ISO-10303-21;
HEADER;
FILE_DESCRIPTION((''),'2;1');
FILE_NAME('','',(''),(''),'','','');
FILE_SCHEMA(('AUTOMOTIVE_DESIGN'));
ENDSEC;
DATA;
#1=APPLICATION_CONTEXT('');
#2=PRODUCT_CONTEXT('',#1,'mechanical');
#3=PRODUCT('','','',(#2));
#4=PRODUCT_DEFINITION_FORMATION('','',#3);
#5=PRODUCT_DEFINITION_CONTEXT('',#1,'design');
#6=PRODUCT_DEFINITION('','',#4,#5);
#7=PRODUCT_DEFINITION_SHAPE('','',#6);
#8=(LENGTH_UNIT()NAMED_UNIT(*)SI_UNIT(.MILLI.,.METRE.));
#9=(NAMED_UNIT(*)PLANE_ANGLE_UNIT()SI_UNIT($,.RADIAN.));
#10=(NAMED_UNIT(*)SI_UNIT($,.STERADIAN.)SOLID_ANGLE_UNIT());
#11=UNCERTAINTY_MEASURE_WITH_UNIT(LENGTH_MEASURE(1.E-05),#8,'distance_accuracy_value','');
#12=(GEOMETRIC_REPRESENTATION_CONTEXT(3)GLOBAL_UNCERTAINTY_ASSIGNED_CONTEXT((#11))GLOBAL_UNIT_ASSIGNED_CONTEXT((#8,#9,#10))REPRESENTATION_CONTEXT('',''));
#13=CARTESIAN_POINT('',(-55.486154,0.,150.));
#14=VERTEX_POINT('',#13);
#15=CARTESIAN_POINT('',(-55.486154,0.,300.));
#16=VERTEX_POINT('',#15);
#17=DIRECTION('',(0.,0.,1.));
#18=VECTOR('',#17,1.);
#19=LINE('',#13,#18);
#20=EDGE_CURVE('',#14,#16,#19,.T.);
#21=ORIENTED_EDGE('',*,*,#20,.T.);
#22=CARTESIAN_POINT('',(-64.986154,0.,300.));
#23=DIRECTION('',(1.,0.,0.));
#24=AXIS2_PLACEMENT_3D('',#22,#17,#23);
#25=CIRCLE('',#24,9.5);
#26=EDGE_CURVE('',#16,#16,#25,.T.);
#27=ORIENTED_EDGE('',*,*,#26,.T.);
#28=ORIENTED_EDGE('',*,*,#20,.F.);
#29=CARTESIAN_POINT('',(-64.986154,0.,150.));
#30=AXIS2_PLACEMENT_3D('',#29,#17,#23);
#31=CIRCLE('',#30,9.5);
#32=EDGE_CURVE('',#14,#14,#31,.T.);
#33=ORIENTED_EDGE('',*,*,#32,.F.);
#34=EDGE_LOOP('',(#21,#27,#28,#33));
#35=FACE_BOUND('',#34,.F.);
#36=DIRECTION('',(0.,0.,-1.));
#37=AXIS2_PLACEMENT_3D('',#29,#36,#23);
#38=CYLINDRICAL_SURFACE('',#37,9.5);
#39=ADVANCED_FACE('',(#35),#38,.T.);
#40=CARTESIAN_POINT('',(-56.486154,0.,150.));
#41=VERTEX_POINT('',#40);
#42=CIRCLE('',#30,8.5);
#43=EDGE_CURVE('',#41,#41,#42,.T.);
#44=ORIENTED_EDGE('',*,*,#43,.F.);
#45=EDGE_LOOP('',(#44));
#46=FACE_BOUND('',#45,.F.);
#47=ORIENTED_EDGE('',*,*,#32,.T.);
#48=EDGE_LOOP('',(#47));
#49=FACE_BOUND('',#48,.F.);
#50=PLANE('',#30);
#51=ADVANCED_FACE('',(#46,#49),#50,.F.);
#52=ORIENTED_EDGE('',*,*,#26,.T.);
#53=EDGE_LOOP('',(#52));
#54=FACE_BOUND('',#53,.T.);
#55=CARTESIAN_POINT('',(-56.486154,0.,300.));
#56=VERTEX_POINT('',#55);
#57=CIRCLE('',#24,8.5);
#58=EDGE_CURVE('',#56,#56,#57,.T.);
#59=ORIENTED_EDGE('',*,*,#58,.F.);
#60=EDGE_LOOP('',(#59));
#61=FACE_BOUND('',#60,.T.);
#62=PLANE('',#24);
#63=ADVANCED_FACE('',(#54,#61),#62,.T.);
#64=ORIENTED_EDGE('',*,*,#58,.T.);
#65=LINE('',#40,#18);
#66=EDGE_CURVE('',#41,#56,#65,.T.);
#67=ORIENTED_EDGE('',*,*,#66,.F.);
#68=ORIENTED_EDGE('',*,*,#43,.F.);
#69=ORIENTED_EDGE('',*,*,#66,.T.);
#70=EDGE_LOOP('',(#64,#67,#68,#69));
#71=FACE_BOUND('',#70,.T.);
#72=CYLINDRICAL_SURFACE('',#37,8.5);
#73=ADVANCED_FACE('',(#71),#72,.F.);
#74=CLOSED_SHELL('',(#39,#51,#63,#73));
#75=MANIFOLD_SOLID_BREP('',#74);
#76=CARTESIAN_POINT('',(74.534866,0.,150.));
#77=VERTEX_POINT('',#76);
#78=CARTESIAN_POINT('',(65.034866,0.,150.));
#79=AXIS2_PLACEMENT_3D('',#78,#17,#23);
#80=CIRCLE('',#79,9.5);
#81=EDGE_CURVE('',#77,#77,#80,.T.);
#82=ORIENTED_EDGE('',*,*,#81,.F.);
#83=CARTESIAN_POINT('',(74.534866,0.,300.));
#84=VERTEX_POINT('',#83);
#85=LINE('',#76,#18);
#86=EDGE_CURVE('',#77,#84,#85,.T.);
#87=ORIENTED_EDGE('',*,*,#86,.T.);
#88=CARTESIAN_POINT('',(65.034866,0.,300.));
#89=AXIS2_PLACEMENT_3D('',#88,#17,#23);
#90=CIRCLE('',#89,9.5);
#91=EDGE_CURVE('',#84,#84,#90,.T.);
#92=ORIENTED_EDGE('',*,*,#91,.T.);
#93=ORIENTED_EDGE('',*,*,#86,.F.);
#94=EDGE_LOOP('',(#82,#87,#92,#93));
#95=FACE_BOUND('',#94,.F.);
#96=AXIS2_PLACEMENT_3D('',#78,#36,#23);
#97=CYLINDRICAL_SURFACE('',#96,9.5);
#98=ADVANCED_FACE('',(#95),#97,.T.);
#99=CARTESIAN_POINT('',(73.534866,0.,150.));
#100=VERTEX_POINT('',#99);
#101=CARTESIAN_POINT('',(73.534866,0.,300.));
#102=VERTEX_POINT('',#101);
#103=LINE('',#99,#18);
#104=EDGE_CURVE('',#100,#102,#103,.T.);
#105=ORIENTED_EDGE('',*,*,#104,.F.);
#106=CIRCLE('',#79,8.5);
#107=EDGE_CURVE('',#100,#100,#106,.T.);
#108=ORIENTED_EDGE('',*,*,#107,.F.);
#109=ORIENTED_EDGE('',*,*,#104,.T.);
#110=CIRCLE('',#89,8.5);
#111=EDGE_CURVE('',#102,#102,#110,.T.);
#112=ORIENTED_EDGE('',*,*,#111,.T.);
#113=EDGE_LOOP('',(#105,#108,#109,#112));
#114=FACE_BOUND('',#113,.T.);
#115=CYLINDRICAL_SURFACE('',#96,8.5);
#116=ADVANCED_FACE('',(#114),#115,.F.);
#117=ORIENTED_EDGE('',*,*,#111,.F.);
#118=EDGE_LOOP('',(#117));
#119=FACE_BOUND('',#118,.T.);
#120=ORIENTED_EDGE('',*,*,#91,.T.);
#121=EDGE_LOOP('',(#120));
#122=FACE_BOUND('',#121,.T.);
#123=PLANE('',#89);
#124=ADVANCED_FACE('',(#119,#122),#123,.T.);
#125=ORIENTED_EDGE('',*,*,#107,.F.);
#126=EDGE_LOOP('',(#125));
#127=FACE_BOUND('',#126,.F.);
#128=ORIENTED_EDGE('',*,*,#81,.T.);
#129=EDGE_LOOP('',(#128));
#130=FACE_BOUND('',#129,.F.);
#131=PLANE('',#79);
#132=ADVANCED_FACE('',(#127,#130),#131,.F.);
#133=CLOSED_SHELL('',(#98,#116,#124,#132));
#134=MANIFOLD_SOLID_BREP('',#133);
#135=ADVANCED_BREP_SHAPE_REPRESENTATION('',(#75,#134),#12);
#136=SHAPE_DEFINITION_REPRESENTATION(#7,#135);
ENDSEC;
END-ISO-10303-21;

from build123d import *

# Parameters (mm, degrees)
F0_R     = 75
F0_R_2   = 9.5
F0_R_3   = 55
F1_DEPTH = 150
F2_R     = 75
F3_DEPTH = 5
F4_R     = 9.5
F4_R_2   = 8.5
F6_DEPTH = 150
F4_R_3   = 4.5949512094


# Not quite as in the source:
# - the program builds the solid bodies; features that only make, move or delete a surface that nothing else refers to are left out


with BuildPart() as f1:
    # F0 (on Top) → F1 (new body)
    with BuildSketch(Plane.XY):
        Circle(F0_R)
        with Locations((-64.9861544371, 0)):
            Circle(F0_R_2, mode=Mode.SUBTRACT)
        Circle(F0_R_3, mode=Mode.SUBTRACT)
        with Locations((65.034866333, 0)):
            Circle(F0_R_2, mode=Mode.SUBTRACT)
    extrude(amount=F1_DEPTH)

    # F2 (on face) → F3 (join)
    with BuildSketch(Plane(origin=(0, 0, 0), x_dir=(1, 0, 0), z_dir=(0, 0, -1))):
        Circle(F2_R)
    extrude(amount=F3_DEPTH)


with BuildPart() as f6:
    # F4 (on face) → F6 (new body)
    with BuildSketch(Plane.XY.offset(150)):
        with Locations((65.034866333, 0)):
            Circle(F4_R)
        with Locations((65.034866333, 0)):
            Circle(F4_R_2, mode=Mode.SUBTRACT)
    extrude(amount=F6_DEPTH)


with BuildPart() as f6b:
    # F4 (on face) → F6, piece 2 (new body)
    with BuildSketch(Plane.XY.offset(150)):
        with Locations((-64.9861544371, 0)):
            Circle(F4_R)
        with Locations((-64.9861544371, 0)):
            Circle(F4_R_2, mode=Mode.SUBTRACT)
    extrude(amount=F6_DEPTH)


with BuildPart() as f6c:
    # F4 (on face) → F6, piece 3 (new body)
    with BuildSketch(Plane.XY.offset(150)):
        with Locations((-6.2923626974, 0)):
            Circle(F4_R_3)
    extrude(amount=F6_DEPTH)


solid = Compound([f6.part, f6b.part])
